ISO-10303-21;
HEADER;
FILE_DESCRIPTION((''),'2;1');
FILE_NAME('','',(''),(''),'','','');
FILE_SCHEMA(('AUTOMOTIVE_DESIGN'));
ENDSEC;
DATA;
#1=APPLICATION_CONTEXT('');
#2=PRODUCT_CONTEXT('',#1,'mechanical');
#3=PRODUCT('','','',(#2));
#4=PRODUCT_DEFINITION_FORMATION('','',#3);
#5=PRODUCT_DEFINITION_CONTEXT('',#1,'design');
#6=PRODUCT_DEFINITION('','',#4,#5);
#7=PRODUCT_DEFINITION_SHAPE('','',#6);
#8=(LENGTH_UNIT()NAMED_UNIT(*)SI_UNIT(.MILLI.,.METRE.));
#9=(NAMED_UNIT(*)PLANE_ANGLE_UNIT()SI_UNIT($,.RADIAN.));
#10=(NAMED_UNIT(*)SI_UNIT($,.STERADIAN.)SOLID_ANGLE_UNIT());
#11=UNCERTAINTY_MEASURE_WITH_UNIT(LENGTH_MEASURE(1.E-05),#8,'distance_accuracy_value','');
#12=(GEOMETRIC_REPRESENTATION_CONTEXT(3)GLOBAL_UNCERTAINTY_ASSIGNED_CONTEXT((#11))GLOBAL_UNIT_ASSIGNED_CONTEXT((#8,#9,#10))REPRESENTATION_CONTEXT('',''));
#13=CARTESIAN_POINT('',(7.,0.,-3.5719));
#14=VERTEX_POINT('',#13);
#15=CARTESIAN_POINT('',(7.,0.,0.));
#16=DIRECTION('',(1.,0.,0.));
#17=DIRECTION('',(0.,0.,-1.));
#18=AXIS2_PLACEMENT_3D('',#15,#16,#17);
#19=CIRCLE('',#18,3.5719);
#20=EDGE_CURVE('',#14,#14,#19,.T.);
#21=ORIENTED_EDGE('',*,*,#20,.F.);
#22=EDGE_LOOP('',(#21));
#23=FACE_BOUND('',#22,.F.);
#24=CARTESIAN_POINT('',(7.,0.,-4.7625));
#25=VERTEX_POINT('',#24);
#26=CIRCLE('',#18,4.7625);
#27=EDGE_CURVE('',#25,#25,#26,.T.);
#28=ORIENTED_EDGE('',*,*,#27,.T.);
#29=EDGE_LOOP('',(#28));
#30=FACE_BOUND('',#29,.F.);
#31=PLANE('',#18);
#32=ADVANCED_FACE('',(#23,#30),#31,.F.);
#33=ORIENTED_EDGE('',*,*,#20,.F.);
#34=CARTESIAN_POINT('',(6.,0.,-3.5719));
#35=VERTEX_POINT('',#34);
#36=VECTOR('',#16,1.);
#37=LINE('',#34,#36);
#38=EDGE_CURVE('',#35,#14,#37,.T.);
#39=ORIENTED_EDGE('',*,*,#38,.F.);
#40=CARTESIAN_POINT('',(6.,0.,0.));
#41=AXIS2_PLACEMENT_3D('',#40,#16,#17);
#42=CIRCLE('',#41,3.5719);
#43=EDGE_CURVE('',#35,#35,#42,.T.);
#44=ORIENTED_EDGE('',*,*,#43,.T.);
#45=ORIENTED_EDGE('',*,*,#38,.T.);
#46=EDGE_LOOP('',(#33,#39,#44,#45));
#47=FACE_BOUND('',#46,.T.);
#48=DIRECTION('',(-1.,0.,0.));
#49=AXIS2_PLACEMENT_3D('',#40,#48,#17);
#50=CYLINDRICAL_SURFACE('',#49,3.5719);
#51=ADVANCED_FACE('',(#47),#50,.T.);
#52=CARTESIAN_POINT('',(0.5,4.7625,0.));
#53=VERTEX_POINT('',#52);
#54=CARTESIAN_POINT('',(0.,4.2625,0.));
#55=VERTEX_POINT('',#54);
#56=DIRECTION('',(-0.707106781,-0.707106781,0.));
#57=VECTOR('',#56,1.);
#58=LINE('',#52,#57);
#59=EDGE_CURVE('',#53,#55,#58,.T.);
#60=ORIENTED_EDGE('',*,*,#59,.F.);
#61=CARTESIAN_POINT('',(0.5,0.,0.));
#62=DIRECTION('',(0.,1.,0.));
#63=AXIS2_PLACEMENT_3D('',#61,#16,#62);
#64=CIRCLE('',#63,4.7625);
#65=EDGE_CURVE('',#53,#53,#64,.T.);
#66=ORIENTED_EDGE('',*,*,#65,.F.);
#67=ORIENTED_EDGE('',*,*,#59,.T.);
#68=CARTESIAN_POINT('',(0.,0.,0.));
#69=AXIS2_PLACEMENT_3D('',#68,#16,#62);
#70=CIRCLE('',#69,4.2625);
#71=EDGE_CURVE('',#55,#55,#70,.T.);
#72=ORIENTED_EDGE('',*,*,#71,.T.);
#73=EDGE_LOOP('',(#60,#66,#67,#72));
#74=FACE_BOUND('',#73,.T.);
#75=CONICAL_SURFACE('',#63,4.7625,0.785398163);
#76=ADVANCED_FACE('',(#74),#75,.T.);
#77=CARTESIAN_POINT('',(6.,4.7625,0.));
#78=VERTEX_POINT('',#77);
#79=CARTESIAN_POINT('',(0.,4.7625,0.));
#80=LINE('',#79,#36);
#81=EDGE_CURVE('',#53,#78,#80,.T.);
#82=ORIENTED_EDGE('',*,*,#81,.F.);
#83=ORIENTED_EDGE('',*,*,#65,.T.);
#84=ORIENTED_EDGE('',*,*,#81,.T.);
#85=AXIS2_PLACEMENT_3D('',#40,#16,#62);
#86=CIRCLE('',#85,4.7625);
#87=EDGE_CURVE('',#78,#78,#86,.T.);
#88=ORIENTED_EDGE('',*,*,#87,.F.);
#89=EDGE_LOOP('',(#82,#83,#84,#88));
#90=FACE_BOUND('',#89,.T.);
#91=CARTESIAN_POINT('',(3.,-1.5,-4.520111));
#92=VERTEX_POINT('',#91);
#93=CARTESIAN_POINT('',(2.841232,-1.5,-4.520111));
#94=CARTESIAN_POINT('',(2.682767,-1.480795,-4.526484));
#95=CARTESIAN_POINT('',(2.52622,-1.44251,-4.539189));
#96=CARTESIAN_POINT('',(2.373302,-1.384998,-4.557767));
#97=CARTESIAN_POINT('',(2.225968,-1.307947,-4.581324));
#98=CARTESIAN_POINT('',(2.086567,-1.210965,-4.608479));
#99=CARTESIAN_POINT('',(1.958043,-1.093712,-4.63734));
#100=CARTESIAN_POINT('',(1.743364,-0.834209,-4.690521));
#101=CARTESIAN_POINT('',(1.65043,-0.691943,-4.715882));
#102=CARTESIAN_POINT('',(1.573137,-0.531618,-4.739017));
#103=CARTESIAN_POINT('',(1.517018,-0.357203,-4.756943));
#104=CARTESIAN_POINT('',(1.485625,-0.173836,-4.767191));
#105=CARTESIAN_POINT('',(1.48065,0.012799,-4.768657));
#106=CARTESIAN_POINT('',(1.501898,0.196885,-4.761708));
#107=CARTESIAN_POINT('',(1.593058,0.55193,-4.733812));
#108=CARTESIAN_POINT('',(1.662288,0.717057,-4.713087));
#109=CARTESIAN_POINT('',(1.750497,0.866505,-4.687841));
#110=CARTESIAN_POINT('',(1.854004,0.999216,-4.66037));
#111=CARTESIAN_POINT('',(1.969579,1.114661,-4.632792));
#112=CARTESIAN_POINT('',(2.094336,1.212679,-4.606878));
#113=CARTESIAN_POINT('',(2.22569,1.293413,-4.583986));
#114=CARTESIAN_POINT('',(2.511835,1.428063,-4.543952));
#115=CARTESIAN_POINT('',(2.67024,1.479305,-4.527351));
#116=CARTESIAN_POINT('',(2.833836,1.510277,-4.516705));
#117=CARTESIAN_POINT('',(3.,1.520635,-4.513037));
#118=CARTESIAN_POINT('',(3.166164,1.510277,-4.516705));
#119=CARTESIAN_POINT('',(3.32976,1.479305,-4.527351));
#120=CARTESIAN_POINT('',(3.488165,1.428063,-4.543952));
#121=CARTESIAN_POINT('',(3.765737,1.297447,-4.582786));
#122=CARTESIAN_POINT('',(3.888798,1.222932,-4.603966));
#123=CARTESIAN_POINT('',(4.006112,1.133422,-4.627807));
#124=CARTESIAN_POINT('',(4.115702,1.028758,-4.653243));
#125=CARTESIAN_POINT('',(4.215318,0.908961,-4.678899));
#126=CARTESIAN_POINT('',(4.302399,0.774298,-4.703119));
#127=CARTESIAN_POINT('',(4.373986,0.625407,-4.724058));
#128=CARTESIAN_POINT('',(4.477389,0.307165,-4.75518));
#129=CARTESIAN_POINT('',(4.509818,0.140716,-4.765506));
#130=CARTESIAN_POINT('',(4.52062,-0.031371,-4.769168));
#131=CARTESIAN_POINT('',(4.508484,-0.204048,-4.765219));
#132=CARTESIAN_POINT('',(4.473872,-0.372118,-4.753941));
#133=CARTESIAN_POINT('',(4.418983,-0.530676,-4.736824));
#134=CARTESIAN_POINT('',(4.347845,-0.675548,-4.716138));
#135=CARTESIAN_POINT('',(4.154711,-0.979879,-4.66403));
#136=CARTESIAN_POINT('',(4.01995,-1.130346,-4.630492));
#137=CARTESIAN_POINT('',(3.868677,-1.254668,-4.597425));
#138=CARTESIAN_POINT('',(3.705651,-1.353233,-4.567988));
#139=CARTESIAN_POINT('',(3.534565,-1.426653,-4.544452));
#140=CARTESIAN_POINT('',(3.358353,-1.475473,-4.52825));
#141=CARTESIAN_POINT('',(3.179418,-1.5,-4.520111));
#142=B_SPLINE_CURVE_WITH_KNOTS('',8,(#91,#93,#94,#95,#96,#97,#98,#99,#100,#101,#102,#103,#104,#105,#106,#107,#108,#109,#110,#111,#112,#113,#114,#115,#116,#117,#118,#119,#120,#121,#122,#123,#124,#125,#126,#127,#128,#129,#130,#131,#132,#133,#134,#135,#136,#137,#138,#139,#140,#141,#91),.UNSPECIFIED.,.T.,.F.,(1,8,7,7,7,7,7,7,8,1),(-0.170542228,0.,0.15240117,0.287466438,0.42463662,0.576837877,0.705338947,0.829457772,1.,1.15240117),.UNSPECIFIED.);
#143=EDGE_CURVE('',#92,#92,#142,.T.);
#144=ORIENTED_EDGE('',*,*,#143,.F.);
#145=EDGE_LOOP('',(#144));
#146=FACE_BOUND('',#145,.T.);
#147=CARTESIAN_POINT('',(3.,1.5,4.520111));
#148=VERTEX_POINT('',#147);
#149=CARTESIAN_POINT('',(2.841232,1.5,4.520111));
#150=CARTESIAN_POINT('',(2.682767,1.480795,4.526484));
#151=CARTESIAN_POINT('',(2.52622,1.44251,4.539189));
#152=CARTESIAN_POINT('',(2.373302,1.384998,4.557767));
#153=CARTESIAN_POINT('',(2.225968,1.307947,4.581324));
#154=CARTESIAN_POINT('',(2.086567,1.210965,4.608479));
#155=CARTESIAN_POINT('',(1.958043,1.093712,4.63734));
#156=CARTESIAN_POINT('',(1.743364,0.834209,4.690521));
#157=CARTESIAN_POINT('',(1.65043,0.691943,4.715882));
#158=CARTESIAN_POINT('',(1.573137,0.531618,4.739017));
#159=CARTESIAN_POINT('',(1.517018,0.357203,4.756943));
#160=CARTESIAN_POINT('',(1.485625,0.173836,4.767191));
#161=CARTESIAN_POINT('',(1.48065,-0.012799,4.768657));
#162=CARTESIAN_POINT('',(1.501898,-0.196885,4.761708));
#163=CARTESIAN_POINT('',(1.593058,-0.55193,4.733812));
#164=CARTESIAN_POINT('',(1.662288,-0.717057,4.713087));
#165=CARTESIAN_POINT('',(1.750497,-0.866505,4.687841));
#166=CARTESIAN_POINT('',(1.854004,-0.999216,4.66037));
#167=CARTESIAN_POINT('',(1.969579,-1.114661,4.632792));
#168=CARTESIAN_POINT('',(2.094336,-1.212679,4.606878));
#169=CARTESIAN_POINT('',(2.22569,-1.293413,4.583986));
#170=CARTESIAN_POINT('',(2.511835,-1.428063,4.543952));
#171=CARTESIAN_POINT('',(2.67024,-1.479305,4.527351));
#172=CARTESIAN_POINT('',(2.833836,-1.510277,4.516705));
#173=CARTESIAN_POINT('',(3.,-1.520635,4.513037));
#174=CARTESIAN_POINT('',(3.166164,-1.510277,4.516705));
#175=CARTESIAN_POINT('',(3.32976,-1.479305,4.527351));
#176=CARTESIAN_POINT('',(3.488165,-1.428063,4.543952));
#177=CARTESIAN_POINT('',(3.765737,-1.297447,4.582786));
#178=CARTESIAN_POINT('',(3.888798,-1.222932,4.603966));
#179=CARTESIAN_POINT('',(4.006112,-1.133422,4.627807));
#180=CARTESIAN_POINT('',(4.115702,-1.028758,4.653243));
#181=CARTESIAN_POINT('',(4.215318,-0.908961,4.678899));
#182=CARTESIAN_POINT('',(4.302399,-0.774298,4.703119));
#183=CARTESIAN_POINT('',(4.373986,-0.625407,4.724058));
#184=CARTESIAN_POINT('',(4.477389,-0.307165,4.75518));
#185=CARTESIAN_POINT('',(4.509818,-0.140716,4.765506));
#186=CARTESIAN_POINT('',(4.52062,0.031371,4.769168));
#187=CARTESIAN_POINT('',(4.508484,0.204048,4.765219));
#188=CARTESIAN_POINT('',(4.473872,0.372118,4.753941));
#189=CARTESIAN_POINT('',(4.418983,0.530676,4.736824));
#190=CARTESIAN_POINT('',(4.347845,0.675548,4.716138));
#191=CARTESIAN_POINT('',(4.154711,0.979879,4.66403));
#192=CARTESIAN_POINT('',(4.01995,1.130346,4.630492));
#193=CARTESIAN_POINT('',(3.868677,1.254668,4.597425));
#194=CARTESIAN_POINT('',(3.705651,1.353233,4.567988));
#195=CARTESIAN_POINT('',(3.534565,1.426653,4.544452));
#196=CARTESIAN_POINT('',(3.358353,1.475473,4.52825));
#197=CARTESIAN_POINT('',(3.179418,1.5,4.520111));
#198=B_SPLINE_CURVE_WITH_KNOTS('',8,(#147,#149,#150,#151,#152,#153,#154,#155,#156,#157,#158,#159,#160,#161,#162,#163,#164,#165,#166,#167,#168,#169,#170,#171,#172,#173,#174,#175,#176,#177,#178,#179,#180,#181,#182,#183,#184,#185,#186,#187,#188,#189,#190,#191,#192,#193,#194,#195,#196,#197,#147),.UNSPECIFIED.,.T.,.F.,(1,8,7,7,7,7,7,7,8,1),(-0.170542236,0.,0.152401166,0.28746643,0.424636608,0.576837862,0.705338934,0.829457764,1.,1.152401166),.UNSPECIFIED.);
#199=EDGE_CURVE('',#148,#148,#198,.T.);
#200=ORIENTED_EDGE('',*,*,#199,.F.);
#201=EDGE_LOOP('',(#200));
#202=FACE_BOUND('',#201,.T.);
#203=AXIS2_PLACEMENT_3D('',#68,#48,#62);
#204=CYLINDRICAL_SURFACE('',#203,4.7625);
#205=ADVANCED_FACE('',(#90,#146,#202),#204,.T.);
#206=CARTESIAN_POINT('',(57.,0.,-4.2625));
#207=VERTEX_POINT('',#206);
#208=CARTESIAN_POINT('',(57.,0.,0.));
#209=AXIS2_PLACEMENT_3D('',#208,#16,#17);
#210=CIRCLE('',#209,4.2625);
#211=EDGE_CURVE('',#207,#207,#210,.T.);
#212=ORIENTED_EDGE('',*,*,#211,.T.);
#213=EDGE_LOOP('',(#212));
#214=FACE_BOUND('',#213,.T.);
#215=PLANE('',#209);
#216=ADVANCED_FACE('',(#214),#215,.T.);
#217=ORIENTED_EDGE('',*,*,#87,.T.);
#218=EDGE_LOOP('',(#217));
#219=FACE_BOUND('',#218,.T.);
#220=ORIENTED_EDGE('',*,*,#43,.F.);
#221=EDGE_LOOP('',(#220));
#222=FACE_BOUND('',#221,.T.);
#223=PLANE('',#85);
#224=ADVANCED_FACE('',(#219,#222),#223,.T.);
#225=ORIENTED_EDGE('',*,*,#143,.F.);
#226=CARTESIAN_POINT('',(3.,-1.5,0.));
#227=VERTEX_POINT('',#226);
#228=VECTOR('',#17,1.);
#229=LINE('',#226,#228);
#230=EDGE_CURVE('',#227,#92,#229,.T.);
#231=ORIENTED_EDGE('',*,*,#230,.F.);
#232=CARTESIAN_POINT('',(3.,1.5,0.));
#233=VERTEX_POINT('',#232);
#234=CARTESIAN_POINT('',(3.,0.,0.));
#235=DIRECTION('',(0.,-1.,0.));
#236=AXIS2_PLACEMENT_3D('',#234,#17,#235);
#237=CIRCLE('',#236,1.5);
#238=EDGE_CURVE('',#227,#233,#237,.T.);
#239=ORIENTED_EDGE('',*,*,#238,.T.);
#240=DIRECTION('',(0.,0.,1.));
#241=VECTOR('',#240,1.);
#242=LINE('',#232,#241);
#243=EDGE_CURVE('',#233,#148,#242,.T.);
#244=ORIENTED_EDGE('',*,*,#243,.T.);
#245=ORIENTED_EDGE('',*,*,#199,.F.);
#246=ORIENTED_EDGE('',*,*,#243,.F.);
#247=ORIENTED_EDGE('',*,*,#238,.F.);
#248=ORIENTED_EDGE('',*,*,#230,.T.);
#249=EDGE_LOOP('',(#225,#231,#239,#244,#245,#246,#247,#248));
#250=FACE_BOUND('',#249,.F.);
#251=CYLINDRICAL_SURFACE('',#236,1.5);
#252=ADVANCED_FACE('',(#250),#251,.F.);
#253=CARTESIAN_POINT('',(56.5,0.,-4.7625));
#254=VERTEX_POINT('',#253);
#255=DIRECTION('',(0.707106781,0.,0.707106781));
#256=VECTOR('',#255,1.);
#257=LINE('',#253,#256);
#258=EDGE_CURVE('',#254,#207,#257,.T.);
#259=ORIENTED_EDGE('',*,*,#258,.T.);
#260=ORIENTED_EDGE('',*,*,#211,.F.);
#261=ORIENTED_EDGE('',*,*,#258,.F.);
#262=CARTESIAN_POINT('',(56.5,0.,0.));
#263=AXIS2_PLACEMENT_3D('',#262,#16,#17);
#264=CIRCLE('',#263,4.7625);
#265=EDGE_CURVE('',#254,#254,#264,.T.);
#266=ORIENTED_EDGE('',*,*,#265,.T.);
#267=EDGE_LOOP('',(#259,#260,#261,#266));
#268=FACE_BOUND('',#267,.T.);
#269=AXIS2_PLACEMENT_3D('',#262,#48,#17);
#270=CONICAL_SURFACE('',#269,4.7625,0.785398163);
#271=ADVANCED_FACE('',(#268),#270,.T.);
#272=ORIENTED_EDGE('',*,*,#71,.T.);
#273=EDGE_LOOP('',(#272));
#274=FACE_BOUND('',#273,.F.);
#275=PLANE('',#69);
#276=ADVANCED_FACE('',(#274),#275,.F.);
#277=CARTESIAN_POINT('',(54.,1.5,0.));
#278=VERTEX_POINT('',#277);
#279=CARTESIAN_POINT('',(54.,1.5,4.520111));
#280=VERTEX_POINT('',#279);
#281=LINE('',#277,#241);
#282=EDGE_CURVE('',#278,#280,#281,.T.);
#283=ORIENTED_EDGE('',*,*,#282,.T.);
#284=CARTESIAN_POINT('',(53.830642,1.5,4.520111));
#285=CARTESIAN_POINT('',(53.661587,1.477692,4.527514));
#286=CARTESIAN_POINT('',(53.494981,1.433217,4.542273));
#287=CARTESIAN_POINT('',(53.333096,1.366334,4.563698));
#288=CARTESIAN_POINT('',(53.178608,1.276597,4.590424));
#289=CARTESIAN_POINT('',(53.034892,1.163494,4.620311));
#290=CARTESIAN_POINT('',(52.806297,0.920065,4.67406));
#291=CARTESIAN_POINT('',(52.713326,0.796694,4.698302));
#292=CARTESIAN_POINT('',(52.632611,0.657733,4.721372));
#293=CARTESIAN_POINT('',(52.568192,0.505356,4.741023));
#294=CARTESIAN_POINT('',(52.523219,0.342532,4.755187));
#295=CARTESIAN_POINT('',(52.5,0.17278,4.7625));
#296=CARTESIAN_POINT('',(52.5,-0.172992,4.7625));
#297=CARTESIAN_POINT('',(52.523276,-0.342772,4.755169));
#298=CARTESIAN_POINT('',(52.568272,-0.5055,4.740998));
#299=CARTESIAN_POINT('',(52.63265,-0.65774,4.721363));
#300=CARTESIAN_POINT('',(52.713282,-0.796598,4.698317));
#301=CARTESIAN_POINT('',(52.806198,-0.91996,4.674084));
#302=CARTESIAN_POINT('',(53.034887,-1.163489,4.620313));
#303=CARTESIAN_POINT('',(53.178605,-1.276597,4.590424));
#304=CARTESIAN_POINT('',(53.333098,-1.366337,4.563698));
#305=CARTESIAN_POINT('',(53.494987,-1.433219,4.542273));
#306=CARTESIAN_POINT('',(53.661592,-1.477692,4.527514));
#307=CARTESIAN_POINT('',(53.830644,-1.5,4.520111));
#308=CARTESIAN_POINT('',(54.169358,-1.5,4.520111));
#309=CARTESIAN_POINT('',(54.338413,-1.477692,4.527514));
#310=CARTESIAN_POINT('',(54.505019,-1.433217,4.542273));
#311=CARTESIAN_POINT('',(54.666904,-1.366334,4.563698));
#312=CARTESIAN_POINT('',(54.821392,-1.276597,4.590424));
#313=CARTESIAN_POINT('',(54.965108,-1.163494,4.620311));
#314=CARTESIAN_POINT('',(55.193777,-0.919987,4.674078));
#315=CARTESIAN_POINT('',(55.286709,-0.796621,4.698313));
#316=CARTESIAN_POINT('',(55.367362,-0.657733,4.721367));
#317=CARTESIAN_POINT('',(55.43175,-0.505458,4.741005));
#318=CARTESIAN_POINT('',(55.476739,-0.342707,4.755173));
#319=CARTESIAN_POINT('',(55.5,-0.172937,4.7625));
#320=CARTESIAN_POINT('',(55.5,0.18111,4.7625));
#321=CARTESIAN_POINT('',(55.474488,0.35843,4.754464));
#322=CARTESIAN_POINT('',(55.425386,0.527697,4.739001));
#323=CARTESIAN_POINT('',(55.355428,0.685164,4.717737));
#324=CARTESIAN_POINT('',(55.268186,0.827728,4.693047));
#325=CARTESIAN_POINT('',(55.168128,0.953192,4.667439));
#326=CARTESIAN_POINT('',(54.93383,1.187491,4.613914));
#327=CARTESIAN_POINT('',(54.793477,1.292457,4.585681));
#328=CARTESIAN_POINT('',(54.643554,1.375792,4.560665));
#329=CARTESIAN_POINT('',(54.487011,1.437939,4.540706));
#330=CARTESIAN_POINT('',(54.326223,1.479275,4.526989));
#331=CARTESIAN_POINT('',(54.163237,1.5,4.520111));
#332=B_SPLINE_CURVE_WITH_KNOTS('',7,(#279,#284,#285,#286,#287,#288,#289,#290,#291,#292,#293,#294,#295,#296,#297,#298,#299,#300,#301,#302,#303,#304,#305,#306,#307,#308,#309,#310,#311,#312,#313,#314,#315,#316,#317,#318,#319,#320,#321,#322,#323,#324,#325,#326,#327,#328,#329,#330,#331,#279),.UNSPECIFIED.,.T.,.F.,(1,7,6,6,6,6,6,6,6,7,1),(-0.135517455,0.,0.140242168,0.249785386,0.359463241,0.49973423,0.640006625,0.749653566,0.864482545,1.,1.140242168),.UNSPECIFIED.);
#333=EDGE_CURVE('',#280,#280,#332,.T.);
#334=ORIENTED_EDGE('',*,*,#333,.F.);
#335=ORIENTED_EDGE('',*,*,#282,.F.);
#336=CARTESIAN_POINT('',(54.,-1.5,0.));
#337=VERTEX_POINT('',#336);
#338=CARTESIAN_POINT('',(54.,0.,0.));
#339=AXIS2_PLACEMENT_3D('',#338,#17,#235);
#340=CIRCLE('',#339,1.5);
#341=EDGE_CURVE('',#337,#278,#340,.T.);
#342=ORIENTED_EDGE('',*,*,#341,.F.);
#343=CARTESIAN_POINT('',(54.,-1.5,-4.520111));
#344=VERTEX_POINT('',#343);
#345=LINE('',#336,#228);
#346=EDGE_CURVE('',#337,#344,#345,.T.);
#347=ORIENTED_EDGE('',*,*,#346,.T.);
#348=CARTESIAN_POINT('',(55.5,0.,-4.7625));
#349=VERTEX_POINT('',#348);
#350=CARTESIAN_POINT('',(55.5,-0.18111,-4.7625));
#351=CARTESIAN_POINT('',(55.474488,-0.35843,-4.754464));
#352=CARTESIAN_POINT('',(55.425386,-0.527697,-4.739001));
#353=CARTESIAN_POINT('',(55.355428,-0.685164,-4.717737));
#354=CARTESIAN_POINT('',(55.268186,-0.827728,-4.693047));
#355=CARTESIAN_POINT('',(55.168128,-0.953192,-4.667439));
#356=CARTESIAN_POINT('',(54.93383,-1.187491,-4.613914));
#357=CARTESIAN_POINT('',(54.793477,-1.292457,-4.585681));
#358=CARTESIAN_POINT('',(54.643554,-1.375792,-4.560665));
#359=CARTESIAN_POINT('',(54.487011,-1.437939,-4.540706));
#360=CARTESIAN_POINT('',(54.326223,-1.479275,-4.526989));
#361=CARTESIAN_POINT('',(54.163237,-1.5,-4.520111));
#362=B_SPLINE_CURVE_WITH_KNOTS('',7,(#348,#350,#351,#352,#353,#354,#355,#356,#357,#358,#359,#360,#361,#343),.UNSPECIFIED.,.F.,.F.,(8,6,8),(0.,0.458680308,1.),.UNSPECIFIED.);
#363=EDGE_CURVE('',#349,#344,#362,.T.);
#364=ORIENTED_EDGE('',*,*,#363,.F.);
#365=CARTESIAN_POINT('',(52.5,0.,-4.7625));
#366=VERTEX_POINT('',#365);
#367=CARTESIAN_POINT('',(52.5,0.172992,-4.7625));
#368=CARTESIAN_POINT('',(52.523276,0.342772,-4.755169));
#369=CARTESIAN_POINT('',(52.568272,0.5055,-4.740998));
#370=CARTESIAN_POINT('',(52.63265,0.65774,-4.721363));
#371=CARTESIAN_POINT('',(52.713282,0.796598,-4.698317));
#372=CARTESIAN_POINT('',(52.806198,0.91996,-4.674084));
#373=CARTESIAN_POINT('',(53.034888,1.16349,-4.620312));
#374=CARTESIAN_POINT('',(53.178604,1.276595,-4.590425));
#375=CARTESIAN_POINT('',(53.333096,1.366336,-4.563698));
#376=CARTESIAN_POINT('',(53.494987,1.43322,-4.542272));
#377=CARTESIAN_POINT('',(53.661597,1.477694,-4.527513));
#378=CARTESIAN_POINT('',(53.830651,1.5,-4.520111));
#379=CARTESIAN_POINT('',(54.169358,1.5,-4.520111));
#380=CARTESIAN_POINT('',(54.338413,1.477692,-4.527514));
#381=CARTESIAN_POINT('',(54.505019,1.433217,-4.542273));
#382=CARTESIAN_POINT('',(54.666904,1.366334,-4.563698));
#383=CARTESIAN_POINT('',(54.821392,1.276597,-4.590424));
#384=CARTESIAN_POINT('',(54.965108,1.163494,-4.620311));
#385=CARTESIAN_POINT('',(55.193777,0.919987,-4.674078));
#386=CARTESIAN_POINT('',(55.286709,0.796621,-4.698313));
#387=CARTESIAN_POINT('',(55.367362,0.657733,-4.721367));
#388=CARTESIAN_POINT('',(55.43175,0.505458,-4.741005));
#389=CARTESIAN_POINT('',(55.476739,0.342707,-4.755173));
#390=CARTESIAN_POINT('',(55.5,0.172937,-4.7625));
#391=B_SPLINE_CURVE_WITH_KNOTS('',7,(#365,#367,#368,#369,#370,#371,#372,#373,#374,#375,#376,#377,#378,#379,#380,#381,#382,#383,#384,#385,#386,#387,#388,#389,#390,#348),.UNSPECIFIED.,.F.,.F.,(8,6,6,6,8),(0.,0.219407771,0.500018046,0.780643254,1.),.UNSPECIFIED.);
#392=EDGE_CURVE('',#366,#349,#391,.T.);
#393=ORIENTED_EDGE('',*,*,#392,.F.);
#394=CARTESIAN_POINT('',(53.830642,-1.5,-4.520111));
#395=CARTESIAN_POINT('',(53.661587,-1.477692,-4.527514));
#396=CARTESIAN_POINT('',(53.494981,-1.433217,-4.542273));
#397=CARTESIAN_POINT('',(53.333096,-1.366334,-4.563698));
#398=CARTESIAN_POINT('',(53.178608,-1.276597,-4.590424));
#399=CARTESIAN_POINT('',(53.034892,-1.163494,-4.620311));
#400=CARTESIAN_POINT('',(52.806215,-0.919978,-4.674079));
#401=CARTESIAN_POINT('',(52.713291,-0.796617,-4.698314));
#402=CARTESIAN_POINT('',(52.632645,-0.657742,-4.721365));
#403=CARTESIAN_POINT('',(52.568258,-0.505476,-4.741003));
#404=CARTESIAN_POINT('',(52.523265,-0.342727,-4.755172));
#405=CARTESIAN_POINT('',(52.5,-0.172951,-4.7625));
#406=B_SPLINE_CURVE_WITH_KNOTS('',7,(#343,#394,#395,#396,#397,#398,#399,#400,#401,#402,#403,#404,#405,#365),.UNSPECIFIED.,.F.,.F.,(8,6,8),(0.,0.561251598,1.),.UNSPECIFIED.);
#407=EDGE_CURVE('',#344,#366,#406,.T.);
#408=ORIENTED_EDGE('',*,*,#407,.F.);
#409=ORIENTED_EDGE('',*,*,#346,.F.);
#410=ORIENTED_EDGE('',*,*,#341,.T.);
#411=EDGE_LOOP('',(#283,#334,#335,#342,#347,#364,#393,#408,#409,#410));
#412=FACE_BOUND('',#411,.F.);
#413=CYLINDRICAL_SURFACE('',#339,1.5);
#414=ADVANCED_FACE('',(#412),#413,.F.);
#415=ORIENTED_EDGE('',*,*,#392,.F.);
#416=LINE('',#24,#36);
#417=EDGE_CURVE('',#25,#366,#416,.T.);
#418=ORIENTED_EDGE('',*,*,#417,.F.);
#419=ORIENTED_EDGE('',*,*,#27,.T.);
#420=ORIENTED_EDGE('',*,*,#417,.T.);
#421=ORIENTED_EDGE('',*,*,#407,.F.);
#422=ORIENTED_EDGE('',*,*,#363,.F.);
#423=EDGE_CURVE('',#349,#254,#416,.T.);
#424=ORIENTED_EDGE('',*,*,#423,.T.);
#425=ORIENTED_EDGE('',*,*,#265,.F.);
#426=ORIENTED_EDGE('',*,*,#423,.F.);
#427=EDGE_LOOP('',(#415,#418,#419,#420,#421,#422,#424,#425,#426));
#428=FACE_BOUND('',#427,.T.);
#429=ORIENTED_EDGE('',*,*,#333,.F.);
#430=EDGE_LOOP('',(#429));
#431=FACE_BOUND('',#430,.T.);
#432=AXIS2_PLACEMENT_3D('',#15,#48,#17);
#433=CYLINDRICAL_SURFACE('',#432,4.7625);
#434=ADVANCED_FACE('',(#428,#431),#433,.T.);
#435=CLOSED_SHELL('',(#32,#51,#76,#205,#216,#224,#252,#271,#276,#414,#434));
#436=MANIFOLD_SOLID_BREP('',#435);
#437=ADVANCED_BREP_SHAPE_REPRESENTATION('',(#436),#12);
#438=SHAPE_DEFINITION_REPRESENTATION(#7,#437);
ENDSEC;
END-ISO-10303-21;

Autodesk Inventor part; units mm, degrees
ref_plane "YZ Plane" through (0, 0, 0) normal (1, 0, 0) x (0, 1, 0)
ref_plane "XZ Plane" through (0, 0, 0) normal (0, 1, 0) x (-1, 0, 0)
ref_plane "XY Plane" through (0, 0, 0) normal (0, 0, 1) x (1, 0, 0)
sketch "Esboço2" plane through (0, 0, 0) normal (1, 0, 0) x (0, 1, 0)
  circle A0 centre (0, 0) radius 4.7625
  dimension "d0" = 9.525
extrude "Extrusão1" add sketch "Esboço2" along normal blind 6
sketch "Esboço3" plane through (6, 0, 0) normal (1, 0, 0) x (0, 0, -1)
  circle A0 centre (0, 0) radius 4.7625 projected
  circle A1 centre (0, 0) radius 3.5719
  dimension "d3" = 7.1437
extrude "Extrusão2" add sketch "Esboço3" along normal blind 1 contours A1
sketch "Esboço4" plane through (7, 0, 0) normal (1, 0, 0) x (0, 0, -1)
  circle A0 centre (0, 0) radius 3.5719 projected
  circle A1 centre (0, 0) radius 4.7625
  dimension "d6" = 9.525
extrude "Extrusão3" add sketch "Esboço4" along normal blind 50 contours A0 | A1
chamfer "Chanfro1" distance 0.5 angle 45 2 edges at (0, -4.7625, 0) (57, 0, 4.7625)
sketch "Esboço7" plane through (0, 0, 0) normal (0, 0, 1) x (1, 0, 0)
  line L0 (57, 4.2625) -> (57, -4.2625) projected
  line L1 (0, -4.2625) -> (0, 4.2625) projected
  point P0 (0, 0)
  point P1 (54, 0)
  point P2 (3, 0)
  dimension "d18" = 3
  dimension "d33" = 3
hole "Furo1" at (54, 0, 0) at (3, 0, 0) direction (0, 0, -1) diameter 3 end through all
hole "Furo2" at (54, 0, 0) at (3, 0, 0) direction (0, 0, 1) diameter 3 end through all
equation "\"d33\" = d18"
properties part number "pino_a3" material "Aço carbono"
